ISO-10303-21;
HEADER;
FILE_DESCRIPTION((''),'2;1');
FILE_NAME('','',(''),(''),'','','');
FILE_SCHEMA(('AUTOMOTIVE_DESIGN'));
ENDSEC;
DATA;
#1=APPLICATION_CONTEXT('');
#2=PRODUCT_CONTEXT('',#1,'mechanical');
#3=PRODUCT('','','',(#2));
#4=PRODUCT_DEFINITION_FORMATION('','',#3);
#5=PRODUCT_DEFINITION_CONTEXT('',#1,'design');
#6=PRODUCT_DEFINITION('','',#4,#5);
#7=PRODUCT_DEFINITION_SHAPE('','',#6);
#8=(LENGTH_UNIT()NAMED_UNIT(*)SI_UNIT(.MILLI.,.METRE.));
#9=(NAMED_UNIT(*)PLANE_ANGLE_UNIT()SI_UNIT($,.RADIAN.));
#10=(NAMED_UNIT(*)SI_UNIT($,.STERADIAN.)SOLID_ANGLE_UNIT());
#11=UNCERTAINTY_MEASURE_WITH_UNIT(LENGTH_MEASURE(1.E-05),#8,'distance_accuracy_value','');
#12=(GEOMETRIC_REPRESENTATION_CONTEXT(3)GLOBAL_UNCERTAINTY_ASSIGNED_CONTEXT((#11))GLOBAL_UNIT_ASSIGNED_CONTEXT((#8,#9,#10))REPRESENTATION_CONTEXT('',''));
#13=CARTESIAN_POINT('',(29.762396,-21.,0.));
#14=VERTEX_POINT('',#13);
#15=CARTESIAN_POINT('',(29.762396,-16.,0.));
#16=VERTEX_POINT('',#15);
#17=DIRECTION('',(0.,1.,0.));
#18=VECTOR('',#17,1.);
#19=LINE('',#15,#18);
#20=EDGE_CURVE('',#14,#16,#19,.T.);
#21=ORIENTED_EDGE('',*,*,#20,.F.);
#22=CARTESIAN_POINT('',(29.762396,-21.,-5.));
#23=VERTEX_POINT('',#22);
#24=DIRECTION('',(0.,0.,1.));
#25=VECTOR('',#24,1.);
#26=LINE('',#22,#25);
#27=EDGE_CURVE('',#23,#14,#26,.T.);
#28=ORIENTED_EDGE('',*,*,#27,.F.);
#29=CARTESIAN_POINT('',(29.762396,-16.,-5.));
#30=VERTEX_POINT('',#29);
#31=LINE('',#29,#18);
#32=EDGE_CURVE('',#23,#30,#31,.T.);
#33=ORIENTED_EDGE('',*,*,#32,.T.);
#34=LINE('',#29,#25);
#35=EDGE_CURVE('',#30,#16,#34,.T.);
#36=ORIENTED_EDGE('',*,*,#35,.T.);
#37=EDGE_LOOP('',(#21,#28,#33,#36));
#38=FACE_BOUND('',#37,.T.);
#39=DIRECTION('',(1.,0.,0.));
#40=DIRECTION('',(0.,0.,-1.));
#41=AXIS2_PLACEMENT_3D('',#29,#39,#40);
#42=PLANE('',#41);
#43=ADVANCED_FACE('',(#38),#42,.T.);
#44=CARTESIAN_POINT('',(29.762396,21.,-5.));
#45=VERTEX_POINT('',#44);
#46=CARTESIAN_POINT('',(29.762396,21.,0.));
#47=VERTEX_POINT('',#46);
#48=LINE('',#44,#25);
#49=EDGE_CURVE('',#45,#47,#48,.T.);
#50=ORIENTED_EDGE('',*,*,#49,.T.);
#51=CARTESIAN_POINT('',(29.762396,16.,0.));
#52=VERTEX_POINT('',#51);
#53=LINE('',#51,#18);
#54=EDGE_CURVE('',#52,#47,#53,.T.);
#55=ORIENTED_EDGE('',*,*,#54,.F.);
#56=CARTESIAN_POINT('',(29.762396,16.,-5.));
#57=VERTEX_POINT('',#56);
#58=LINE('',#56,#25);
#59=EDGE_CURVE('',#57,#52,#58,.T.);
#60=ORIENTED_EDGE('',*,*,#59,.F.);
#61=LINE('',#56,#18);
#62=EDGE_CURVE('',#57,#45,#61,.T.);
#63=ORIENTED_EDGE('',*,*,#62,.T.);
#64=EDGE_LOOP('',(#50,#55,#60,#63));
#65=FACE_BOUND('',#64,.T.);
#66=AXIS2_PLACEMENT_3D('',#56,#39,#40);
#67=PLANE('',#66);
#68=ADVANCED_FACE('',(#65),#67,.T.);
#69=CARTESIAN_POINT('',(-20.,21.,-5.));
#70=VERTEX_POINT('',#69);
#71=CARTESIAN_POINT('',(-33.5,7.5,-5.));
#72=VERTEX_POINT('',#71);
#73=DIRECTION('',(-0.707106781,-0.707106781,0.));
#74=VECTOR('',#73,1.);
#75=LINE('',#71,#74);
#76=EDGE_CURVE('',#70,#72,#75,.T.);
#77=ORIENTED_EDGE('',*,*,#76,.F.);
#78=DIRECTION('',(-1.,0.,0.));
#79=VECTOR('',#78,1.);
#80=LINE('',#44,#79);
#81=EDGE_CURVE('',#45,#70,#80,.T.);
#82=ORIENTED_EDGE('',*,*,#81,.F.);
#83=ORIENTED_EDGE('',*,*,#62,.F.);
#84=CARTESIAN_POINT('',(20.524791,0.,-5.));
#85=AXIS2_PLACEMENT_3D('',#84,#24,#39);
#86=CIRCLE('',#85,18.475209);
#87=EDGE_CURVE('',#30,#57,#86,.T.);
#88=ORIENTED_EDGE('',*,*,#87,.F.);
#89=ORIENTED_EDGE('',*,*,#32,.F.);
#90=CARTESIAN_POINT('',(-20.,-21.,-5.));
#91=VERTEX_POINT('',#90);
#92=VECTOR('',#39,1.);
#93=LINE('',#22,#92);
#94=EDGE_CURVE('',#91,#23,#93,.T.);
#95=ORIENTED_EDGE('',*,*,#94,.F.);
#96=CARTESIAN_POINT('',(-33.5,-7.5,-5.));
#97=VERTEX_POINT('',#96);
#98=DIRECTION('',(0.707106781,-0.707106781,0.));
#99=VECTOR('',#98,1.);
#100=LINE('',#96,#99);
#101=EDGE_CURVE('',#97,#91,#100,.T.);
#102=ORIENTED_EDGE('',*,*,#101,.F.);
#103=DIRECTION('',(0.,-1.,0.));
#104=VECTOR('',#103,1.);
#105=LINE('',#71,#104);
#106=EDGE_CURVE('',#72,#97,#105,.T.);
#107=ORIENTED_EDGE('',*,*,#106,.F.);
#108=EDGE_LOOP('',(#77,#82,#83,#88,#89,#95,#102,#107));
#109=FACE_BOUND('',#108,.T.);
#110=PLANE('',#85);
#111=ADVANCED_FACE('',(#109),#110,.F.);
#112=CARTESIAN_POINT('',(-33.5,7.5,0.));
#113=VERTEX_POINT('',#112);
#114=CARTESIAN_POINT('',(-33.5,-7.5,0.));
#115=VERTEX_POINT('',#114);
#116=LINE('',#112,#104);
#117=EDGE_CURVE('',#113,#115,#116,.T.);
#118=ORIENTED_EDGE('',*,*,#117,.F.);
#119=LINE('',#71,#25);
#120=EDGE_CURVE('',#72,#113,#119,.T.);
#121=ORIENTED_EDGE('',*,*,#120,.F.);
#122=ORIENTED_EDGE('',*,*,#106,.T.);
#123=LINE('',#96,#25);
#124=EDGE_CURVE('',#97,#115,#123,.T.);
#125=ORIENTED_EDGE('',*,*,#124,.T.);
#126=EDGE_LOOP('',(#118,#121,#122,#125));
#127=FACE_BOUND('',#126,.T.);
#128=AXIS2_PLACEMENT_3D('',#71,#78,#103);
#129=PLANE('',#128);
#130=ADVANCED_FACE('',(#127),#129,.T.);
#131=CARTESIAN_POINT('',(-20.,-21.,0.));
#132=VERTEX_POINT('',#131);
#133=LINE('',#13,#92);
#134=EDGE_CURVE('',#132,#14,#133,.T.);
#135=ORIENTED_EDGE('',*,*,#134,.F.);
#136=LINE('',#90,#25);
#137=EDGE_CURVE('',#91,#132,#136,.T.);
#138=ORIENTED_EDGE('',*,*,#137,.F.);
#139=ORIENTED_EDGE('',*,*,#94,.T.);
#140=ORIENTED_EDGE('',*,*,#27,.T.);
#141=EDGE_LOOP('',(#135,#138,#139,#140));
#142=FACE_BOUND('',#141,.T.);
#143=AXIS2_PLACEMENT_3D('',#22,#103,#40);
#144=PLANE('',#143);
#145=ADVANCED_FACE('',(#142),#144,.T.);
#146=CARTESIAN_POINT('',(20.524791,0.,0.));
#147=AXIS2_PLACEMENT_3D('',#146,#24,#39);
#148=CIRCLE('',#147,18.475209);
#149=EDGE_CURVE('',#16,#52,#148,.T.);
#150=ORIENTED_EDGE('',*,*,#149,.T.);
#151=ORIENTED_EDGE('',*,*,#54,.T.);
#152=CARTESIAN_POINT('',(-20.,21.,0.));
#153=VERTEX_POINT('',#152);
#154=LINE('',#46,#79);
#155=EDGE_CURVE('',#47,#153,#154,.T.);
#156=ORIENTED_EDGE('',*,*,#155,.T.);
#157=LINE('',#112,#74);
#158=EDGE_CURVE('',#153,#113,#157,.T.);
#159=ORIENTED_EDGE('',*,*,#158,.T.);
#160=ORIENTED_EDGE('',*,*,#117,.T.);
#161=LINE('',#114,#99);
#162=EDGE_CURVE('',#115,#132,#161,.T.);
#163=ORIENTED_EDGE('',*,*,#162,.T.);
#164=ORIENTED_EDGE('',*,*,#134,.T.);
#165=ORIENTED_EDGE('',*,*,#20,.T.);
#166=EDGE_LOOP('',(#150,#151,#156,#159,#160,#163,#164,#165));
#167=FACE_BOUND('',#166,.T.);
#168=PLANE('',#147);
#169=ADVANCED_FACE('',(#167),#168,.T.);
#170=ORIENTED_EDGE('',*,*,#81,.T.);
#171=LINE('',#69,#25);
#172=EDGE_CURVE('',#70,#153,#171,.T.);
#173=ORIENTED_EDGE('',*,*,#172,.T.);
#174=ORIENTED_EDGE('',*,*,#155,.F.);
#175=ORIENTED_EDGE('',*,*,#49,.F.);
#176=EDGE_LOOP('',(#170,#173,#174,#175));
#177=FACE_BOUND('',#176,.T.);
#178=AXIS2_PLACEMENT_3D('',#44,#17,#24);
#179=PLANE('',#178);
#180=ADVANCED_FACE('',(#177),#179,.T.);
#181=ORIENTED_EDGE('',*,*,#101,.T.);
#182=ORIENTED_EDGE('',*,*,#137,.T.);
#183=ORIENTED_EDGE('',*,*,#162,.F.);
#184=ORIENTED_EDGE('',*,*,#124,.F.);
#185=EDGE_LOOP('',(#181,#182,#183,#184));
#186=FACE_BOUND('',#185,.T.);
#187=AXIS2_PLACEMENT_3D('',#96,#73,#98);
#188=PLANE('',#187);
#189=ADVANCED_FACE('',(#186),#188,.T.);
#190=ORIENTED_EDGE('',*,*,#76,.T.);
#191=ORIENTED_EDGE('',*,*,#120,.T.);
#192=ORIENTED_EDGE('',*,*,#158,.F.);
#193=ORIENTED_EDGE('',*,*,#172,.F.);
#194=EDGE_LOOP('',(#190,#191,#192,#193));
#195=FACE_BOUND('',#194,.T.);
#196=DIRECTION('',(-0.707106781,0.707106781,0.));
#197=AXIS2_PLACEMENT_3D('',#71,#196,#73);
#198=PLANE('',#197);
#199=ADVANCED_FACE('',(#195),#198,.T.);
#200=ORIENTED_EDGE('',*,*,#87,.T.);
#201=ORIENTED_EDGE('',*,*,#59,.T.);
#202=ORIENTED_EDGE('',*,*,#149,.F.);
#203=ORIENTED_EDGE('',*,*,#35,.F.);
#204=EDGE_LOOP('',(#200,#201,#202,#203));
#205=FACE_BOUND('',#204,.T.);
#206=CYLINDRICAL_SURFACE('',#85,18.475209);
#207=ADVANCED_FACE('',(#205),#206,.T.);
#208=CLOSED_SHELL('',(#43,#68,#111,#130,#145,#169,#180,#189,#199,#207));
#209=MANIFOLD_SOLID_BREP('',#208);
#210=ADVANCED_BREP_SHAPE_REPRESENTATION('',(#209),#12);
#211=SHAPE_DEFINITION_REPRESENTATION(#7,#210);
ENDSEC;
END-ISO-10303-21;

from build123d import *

# Parameters (mm, degrees)
SM_BASE_FLANGE_1_DEPTH = 5


# Sheet-metal steps are written as plain solids
with BuildPart() as part:
    # Sketch 1 → Базовая кромка1 (new body)
    with BuildSketch(Plane.XY):
        with BuildLine():
            Line((29.76239566, 16.000000043), (29.76239566, 21.000000043))
            Line((29.76239566, 21.000000043), (-20, 21.000000043))
            Line((-20, 21.000000043), (-33.500000043, 7.5))
            Line((-33.500000043, 7.5), (-33.500000043, -7.5))
            Line((-33.500000043, -7.5), (-20, -21.000000043))
            Line((-20, -21.000000043), (29.76239566, -21.000000043))
            Line((29.76239566, -21.000000043), (29.76239566, -16.000000043))
            ThreePointArc((29.76239566, -16.000000043), (39.00000001, -1.1e-08), (29.76239566, 16.000000043))
        make_face()
    extrude(amount=-SM_BASE_FLANGE_1_DEPTH)


solid = part.part
